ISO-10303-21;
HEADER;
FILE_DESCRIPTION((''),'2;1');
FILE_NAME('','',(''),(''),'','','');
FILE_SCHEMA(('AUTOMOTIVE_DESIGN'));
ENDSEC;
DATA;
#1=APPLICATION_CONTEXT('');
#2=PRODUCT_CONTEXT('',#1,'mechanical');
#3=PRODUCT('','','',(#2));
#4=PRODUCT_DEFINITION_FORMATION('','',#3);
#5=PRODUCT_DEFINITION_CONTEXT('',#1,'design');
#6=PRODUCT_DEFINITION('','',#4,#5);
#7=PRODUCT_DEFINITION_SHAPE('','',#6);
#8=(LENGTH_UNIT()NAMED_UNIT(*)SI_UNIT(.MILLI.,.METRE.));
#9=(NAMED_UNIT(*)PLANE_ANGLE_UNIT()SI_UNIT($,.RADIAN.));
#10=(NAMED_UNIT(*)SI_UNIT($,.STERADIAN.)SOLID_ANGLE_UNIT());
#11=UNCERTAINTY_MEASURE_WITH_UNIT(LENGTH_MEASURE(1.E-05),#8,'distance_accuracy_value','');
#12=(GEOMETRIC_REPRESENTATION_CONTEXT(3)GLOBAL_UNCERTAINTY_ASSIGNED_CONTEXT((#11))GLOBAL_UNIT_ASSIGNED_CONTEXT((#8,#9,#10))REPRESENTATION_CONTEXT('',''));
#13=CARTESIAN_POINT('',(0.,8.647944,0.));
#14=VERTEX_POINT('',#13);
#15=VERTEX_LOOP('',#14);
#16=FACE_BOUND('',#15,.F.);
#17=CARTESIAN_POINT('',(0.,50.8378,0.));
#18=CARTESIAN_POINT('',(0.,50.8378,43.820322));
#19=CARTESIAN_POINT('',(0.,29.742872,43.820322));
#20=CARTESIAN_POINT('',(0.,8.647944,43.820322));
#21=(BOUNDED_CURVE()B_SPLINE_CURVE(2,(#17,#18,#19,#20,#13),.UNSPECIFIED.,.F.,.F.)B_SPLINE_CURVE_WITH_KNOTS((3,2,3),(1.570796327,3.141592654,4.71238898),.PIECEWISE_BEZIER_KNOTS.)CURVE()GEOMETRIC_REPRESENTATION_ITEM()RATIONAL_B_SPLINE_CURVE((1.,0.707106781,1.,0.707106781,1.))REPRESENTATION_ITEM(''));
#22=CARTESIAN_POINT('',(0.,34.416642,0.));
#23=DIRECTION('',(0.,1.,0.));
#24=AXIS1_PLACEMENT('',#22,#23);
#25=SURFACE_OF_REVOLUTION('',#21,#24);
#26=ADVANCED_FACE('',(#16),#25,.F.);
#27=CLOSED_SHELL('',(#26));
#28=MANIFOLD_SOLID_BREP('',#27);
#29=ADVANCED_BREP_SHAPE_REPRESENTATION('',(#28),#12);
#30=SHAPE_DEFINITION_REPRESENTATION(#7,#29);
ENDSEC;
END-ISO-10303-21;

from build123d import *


# Not quite as in the source:
# - a feature of the source that left no trace in its solid (it failed there, or was rolled back) is left out


with BuildPart() as f8:
    # F7 (on Right) → F8 (revolve)
    with BuildSketch(Plane.YZ):
        with BuildLine():
            Line((8.6479444287, 0), (50.8378002562, 0))
            add(Edge.make_bspline(
                [(50.8378002562, 0), (50.8378002562, 43.8203215599), (29.7428723425, 43.8203215599), (8.6479444287, 43.8203215599), (8.6479444287, 0)],
                knots=[1.5707963268, 1.5707963268, 1.5707963268, 3.1415926536, 3.1415926536, 4.7123889804, 4.7123889804, 4.7123889804], degree=2, weights=[1, 0.7071067812, 1, 0.7071067812, 1]))
        make_face()
    revolve(axis=Axis((0, 34.41664204, 0), (0, 1, 0)))


solid = f8.part
